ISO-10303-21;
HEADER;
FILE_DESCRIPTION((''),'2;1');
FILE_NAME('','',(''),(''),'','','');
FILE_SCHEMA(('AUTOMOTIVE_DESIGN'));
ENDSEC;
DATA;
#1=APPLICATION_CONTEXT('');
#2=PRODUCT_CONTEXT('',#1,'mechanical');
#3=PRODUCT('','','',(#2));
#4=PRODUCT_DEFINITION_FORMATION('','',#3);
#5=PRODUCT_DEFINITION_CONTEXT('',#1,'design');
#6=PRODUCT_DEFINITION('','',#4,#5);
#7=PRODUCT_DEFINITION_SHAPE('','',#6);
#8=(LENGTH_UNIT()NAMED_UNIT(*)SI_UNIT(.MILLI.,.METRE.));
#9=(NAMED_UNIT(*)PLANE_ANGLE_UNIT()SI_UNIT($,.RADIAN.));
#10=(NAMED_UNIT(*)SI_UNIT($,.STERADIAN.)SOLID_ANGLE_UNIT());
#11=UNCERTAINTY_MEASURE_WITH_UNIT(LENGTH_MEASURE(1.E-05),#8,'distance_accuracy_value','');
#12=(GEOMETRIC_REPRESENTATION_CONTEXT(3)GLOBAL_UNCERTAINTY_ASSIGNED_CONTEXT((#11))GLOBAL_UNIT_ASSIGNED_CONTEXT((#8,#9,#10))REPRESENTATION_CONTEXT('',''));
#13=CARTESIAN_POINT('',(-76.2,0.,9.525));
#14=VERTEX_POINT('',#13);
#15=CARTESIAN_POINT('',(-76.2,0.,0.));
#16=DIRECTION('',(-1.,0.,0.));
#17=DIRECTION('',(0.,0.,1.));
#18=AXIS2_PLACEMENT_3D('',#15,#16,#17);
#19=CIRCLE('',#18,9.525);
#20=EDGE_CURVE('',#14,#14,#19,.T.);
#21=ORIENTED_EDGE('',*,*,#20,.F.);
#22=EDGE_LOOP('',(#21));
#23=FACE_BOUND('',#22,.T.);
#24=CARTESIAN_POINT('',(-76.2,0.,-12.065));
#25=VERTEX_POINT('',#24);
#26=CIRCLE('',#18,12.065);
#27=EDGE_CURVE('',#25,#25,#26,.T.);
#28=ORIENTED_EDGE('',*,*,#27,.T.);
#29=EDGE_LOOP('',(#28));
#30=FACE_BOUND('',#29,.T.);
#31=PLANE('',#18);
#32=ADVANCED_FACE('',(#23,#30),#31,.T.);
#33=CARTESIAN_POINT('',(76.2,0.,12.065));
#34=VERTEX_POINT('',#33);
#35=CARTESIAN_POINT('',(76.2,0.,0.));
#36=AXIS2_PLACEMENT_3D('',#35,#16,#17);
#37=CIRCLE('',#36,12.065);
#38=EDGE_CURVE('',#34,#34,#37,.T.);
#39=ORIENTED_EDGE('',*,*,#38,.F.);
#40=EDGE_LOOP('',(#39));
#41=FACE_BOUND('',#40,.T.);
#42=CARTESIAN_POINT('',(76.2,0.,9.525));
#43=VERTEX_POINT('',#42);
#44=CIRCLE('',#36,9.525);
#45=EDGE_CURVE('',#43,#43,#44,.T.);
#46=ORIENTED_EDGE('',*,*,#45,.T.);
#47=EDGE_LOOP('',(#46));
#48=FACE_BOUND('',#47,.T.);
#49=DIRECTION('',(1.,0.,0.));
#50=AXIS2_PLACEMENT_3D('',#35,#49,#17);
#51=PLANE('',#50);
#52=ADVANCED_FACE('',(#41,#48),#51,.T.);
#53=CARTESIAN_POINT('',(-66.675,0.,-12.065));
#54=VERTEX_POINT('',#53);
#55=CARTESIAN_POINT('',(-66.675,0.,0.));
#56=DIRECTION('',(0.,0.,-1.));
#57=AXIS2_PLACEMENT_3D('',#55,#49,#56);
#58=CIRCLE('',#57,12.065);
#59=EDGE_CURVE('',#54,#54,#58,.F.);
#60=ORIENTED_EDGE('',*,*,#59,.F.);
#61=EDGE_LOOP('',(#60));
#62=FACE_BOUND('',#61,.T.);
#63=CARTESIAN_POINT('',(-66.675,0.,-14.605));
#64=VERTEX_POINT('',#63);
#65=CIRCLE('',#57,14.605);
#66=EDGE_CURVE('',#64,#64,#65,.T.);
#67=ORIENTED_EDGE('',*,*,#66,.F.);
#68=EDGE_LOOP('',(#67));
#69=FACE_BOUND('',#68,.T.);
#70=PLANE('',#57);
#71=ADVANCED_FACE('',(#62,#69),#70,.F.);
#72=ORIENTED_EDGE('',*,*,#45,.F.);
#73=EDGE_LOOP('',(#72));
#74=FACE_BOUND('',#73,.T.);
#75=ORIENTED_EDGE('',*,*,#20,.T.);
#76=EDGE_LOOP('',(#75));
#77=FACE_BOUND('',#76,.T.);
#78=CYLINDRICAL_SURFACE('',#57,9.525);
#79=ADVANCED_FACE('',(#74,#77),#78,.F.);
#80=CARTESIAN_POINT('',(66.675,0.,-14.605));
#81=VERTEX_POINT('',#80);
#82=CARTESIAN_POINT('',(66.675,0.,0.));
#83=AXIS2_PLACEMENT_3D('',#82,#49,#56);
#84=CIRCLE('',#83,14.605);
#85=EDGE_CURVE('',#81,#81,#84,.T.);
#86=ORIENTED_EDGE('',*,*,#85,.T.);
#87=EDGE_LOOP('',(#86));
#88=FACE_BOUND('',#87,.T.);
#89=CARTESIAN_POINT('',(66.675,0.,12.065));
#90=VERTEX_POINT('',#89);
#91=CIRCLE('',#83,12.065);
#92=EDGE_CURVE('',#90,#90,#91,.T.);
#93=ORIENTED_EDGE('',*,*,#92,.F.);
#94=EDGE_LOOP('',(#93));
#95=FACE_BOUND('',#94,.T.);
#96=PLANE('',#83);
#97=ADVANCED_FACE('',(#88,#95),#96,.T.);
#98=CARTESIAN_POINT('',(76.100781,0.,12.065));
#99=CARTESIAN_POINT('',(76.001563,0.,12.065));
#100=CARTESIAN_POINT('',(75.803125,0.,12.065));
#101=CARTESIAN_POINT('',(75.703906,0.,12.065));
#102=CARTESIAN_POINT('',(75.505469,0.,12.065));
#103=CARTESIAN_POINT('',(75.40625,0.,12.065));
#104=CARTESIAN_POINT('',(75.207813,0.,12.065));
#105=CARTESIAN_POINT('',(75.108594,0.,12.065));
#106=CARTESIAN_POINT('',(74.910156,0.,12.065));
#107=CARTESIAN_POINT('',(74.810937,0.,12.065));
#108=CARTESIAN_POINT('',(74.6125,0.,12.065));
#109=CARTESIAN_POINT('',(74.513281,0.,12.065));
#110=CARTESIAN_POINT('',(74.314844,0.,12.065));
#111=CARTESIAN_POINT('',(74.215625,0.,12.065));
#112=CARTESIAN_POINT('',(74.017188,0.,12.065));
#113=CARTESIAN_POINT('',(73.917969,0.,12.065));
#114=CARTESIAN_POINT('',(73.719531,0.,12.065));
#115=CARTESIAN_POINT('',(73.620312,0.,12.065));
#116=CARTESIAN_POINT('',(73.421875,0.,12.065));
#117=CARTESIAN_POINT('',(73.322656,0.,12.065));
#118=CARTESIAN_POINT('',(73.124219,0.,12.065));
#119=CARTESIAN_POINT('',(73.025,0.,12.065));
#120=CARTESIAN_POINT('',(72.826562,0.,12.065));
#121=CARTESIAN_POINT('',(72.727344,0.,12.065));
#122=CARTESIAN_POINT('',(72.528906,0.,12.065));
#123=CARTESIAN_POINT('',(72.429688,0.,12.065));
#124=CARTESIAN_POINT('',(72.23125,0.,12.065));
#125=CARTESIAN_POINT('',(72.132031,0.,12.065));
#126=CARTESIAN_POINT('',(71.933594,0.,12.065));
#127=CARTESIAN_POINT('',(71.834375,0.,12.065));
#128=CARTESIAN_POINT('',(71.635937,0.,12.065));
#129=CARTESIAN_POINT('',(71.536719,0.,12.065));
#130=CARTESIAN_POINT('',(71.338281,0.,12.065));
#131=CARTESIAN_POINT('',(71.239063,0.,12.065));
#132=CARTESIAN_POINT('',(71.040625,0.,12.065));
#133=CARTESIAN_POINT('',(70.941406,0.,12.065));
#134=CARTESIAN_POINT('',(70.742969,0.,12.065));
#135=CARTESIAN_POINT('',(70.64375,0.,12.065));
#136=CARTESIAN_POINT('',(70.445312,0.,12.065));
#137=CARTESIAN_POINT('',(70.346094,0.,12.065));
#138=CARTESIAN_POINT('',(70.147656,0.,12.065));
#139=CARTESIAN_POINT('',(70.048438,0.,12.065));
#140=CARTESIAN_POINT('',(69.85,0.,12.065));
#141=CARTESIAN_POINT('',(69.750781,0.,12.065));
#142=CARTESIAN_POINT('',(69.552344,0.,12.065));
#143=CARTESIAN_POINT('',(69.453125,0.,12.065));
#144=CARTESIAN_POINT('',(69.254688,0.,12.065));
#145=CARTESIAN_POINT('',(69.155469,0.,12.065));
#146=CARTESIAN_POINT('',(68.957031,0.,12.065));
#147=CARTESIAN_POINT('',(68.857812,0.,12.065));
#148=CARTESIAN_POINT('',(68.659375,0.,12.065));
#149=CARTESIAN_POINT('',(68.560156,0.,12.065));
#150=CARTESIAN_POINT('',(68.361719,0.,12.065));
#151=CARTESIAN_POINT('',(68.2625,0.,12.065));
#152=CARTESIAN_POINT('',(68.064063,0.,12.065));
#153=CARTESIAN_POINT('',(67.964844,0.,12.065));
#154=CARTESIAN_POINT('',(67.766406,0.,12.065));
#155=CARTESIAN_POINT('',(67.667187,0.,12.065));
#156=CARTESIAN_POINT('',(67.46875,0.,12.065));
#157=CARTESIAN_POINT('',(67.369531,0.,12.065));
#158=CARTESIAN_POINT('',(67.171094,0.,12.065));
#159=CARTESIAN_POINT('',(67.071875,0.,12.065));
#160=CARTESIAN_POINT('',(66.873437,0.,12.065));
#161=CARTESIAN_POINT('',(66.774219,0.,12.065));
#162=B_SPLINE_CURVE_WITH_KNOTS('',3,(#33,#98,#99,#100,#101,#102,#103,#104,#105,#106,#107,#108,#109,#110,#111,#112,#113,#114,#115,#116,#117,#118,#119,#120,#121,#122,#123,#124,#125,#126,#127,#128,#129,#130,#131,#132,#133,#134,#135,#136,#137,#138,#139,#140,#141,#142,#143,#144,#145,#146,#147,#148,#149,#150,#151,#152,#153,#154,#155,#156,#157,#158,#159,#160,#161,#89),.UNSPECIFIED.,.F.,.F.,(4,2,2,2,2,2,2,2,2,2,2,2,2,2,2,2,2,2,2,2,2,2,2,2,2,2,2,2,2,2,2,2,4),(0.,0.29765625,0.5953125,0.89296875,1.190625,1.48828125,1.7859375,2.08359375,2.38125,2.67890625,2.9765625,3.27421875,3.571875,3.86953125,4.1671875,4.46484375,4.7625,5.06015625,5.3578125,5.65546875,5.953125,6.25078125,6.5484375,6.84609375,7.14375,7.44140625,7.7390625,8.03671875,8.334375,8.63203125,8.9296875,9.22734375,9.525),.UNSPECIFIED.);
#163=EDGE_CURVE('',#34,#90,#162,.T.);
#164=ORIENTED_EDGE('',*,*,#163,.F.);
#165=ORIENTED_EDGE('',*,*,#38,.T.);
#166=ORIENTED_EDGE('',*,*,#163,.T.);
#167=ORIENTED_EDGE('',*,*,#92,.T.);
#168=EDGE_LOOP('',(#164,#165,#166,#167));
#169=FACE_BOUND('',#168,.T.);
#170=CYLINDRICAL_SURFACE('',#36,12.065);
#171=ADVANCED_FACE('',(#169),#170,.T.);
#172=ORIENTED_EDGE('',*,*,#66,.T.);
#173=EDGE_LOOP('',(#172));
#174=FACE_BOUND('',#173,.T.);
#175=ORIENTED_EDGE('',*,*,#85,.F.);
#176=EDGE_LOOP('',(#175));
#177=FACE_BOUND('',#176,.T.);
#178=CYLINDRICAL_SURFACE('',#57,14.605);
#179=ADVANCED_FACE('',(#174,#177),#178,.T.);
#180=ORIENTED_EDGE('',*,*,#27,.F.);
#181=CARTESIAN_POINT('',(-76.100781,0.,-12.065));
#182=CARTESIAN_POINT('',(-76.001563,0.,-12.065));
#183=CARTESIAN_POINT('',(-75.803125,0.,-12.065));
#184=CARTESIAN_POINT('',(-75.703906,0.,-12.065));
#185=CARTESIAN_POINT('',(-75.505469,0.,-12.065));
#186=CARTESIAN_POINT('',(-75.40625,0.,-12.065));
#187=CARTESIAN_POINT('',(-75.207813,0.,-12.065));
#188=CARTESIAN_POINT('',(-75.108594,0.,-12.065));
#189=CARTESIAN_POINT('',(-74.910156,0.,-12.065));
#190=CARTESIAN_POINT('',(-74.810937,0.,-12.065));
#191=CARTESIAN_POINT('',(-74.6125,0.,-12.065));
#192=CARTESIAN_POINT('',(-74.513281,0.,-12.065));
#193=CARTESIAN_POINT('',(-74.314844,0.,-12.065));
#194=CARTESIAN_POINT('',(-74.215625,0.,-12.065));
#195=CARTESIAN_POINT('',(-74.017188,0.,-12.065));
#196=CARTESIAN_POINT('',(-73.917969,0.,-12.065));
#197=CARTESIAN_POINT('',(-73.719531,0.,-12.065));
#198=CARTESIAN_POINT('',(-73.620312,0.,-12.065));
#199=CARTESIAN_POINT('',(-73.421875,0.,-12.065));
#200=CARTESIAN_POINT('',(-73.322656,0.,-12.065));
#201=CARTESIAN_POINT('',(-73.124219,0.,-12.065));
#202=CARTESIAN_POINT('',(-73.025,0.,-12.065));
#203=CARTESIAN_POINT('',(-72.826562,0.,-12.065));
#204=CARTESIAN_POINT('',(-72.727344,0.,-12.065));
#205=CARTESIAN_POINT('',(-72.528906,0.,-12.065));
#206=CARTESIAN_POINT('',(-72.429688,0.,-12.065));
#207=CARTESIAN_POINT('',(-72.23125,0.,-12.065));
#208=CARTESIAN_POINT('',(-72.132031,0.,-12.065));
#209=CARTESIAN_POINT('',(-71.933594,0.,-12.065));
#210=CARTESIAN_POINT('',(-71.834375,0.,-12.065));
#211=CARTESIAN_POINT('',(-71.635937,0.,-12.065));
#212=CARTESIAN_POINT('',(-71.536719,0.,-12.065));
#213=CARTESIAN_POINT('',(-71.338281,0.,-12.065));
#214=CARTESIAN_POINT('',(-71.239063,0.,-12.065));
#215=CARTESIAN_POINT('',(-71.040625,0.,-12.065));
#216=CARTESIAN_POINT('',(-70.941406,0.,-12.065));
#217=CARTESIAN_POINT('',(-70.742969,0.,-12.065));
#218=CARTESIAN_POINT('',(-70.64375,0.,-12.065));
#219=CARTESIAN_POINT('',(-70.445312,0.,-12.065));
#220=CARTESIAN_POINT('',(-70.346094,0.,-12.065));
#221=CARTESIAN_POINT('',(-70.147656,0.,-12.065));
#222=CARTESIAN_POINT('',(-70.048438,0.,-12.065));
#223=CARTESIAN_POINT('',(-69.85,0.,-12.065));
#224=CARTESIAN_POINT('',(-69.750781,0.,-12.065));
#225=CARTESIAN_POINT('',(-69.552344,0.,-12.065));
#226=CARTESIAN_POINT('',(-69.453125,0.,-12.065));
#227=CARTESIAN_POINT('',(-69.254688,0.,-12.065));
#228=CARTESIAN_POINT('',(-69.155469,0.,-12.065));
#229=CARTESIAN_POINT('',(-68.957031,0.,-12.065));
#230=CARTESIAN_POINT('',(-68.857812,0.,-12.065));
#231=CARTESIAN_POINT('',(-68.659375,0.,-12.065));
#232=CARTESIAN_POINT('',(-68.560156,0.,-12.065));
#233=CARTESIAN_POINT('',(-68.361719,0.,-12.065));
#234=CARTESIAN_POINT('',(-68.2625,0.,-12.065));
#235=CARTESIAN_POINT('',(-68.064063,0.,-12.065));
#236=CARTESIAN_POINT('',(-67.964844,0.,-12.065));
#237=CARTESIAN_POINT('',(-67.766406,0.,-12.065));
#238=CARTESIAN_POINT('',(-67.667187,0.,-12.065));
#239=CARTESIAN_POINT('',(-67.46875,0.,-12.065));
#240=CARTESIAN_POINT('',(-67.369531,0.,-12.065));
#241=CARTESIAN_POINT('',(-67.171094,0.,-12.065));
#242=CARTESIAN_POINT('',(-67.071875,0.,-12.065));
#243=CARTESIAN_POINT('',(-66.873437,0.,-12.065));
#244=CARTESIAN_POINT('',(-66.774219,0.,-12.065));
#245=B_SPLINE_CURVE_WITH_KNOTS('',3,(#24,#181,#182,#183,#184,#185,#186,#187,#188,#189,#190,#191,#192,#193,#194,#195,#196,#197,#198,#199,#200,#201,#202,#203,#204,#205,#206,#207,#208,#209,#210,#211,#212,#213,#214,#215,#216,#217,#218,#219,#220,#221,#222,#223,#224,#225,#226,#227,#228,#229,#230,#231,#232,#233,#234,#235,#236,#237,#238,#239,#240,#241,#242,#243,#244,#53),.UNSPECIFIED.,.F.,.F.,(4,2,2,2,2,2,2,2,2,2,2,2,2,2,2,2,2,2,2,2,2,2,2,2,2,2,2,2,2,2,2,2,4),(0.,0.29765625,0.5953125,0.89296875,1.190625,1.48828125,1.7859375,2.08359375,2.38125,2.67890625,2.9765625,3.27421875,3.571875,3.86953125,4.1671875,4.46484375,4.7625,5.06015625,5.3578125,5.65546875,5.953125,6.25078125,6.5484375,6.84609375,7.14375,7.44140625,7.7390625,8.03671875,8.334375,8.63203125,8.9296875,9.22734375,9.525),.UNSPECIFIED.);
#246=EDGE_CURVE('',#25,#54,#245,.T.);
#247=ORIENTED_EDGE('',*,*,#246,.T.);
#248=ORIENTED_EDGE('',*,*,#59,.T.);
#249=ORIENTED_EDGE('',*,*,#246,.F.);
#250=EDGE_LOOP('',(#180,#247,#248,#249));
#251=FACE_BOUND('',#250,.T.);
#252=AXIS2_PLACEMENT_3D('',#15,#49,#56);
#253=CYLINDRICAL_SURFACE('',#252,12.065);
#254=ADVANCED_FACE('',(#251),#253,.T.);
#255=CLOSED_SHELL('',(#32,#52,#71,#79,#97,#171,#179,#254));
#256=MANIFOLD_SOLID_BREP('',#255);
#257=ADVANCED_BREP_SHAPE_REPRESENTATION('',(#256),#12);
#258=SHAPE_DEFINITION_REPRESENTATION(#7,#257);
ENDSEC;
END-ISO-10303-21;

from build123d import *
from build123d.topology import SkipClean

# Parameters (mm, degrees)
SWEEP_THIN1_PROFILE_R   = 14.605
SWEEP_THIN1_PROFILE_R_2 = 9.525
SKETCH15_R              = 12.065
SKETCH15_R_2            = 9.525
BOSS_EXTRUDE2_DEPTH     = 9.525


with BuildPart() as part:
    # Sweep-Thin1: sweep along a curve in space
    with BuildLine() as sweep_thin1_path:
        Line((-66.675, 0, 0), (66.675, 0, 0))
    # Sweep-Thin1 profile (on start of the path) → Sweep-Thin1 (sweep)
    with BuildSketch(Plane(origin=(-66.675, 0, 0), x_dir=(0, 0, 1), z_dir=(1, 0, 0))):
        Circle(SWEEP_THIN1_PROFILE_R)
        Circle(SWEEP_THIN1_PROFILE_R_2, mode=Mode.SUBTRACT)
    sweep(path=sweep_thin1_path.line)

    # Sketch15 → Boss-Extrude2 (add)
    with SkipClean():  # the faces are left unmerged after this step: merging them gives an invalid solid
        with BuildSketch(Plane.ZY.offset(66.675)):
            with Locations(Location((0, 0, 0), (0, 0, 180))):
                Circle(SKETCH15_R)
            with Locations(Location((0, 0, 0), (0, 0, 180))):
                Circle(SKETCH15_R_2, mode=Mode.SUBTRACT)
        boss_extrude2 = extrude(amount=BOSS_EXTRUDE2_DEPTH)
    add(part.part.scale(1), mode=Mode.REPLACE)  # the faces are merged on a copy

    # Mirror1: Boss-Extrude2 across plane
    with SkipClean():  # the faces are left unmerged after this step: merging them gives an invalid solid
        add(boss_extrude2.mirror(Plane(origin=(0, 0, 0), x_dir=(0, 0, 1), z_dir=(1, 0, 0))))


solid = part.part
